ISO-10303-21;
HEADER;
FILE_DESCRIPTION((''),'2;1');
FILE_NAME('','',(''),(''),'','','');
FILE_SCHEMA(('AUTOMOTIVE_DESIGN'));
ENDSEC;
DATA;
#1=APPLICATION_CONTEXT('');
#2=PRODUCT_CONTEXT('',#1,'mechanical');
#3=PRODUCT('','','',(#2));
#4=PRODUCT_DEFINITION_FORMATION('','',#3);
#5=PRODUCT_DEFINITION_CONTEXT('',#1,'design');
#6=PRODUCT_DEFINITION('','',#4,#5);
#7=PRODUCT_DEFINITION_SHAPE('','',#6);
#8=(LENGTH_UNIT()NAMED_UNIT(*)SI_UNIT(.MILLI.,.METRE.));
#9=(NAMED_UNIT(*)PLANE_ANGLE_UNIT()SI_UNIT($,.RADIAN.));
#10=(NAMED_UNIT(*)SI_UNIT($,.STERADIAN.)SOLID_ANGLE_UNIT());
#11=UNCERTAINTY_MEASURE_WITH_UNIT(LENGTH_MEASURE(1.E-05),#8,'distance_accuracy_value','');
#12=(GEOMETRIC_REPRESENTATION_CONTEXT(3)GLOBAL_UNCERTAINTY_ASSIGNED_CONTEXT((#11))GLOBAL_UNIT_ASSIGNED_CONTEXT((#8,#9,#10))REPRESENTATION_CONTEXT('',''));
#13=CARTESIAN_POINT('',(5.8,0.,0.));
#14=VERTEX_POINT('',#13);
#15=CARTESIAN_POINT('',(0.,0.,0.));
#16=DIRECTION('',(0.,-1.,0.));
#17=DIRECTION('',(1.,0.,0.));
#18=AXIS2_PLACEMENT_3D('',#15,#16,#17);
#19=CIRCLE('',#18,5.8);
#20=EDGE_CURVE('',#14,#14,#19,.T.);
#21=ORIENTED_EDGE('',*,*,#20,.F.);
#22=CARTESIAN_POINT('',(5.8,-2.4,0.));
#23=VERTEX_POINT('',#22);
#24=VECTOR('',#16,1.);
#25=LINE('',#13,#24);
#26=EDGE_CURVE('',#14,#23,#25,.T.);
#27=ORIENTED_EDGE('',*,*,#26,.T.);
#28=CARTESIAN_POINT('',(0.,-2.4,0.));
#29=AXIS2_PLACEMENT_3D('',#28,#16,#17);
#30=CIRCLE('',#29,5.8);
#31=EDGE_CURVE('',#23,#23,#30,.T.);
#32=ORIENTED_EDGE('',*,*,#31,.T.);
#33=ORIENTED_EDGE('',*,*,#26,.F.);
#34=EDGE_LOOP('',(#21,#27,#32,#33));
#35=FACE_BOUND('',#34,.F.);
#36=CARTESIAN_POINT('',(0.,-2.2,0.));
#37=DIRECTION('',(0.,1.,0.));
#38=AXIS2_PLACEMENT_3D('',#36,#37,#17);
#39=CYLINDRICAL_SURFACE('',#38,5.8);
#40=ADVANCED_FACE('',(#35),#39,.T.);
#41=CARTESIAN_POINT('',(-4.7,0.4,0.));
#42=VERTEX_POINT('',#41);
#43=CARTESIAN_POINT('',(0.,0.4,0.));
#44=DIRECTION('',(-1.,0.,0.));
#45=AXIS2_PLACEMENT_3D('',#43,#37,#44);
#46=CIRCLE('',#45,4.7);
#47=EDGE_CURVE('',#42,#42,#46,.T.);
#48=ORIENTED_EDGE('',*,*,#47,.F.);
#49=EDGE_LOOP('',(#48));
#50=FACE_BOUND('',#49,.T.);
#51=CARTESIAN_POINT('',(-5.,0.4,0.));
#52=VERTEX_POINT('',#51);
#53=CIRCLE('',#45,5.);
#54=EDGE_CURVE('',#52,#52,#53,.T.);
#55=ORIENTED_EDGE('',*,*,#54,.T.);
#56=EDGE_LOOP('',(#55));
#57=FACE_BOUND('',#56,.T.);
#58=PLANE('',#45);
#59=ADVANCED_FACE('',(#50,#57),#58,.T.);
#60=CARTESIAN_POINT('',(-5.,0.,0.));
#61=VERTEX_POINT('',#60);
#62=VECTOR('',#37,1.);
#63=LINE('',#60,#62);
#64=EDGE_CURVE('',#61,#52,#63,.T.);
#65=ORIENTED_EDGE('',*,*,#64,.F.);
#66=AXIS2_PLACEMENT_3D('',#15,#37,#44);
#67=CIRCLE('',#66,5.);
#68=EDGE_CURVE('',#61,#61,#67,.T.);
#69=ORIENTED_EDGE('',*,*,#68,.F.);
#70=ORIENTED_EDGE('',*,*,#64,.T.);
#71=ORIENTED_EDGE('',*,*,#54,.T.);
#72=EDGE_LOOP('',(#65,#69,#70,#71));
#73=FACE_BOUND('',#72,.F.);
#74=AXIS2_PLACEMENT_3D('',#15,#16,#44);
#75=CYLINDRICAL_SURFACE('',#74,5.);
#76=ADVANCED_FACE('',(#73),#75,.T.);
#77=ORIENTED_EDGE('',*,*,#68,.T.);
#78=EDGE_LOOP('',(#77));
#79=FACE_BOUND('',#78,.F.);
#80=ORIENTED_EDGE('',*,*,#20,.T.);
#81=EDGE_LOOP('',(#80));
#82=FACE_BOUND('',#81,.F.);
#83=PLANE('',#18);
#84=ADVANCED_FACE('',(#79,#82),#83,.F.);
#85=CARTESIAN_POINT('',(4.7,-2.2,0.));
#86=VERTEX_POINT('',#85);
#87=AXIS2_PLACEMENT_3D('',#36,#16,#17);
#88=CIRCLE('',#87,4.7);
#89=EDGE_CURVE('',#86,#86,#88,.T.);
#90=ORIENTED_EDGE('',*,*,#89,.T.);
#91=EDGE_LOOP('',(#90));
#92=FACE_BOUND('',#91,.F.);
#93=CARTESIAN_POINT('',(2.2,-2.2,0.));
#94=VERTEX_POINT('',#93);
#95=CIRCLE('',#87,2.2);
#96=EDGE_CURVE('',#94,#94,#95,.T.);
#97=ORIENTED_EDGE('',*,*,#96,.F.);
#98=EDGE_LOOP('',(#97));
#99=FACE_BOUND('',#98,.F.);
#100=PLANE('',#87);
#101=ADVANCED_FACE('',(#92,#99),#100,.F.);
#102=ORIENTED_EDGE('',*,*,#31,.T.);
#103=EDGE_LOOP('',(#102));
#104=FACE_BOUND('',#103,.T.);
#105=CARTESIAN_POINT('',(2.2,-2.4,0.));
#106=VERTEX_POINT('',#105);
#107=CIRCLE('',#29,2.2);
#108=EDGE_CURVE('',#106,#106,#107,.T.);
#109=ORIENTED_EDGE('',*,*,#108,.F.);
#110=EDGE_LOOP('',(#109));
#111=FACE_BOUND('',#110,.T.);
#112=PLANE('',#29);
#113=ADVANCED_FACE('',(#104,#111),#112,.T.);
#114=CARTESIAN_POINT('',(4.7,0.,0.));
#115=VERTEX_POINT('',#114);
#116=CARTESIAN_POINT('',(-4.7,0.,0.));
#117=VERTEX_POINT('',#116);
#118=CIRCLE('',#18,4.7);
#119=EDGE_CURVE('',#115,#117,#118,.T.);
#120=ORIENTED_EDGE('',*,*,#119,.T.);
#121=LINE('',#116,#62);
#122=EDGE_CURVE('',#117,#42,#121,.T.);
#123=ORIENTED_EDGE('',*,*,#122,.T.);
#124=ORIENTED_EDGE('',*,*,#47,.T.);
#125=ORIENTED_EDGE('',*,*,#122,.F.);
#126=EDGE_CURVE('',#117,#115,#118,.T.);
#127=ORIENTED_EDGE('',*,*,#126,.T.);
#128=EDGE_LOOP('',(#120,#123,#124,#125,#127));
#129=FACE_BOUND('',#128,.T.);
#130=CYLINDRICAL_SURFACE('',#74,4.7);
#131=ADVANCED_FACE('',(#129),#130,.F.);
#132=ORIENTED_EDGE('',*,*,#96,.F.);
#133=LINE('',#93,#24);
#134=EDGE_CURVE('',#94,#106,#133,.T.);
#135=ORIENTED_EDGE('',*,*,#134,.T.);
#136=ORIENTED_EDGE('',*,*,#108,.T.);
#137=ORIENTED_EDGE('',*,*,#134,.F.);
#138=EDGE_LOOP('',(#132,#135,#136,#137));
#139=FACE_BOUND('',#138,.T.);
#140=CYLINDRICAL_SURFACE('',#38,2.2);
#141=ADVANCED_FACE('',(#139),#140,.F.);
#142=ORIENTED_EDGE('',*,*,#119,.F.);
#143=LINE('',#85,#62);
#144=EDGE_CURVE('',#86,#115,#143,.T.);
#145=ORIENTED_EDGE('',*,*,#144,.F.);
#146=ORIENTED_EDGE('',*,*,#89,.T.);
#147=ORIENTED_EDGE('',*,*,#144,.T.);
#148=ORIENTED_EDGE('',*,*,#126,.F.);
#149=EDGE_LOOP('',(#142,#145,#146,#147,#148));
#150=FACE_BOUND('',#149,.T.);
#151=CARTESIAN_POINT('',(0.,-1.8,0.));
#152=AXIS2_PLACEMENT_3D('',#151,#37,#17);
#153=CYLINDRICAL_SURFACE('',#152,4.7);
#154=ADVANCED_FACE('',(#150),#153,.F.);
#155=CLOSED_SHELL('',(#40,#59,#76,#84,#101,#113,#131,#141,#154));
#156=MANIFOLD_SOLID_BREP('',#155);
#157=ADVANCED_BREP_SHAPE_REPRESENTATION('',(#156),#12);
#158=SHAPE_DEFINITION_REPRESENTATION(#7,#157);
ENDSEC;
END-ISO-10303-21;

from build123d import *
from build123d import SkipClean  # not in build123d's __all__

# Parameters (mm, degrees)
F0_R     = 5.8
F1_DEPTH = 1.8
F2_R     = 5.8
F2_R_2   = 4.7
F3_DEPTH = 0.4
F4_R     = 4.7
F5_DEPTH = 1.8
F6_R     = 5.8
F6_R_2   = 4.7
F6_R_3   = 2.2
F7_DEPTH = 0.2
F8_R     = 5
F8_R_2   = 4.7
F9_DEPTH = 0.4


# Not quite as in the source:
# - a feature names something its author has since deleted; it is built from what else it names


with BuildPart() as f1:
    # F0 (on Front) → F1 (new body)
    with BuildSketch(Plane.XZ):
        Circle(F0_R)
    extrude(amount=F1_DEPTH)

    # F2 (on face) → F3 (join)
    with BuildSketch(Plane.XZ.offset(1.8)):
        Circle(F2_R)
        Circle(F2_R_2, mode=Mode.SUBTRACT)
    extrude(amount=F3_DEPTH)

    # F4 (on face) → F5 (cut)
    with BuildSketch(Plane.XZ.offset(1.8)):
        Circle(F4_R)
    extrude(amount=-F5_DEPTH, mode=Mode.SUBTRACT)

    # F6 (on face) → F7 (join)
    with BuildSketch(Plane.XZ.offset(2.2)):
        Circle(F6_R)
        Circle(F6_R_2, mode=Mode.SUBTRACT)
        Circle(F6_R_2)
        Circle(F6_R_3, mode=Mode.SUBTRACT)
    extrude(amount=F7_DEPTH)

    # F8 (on face) → F9 (join)
    with BuildSketch(Plane(origin=(0, 0, 0), x_dir=(-1, 0, 0), z_dir=(0, 1, 0))):
        Circle(F8_R)
        Circle(F8_R_2, mode=Mode.SUBTRACT)
    with SkipClean():  # cleaning this boolean's faces spoils the solid; the shape is the same uncleaned
        extrude(amount=F9_DEPTH)


solid = f1.part
